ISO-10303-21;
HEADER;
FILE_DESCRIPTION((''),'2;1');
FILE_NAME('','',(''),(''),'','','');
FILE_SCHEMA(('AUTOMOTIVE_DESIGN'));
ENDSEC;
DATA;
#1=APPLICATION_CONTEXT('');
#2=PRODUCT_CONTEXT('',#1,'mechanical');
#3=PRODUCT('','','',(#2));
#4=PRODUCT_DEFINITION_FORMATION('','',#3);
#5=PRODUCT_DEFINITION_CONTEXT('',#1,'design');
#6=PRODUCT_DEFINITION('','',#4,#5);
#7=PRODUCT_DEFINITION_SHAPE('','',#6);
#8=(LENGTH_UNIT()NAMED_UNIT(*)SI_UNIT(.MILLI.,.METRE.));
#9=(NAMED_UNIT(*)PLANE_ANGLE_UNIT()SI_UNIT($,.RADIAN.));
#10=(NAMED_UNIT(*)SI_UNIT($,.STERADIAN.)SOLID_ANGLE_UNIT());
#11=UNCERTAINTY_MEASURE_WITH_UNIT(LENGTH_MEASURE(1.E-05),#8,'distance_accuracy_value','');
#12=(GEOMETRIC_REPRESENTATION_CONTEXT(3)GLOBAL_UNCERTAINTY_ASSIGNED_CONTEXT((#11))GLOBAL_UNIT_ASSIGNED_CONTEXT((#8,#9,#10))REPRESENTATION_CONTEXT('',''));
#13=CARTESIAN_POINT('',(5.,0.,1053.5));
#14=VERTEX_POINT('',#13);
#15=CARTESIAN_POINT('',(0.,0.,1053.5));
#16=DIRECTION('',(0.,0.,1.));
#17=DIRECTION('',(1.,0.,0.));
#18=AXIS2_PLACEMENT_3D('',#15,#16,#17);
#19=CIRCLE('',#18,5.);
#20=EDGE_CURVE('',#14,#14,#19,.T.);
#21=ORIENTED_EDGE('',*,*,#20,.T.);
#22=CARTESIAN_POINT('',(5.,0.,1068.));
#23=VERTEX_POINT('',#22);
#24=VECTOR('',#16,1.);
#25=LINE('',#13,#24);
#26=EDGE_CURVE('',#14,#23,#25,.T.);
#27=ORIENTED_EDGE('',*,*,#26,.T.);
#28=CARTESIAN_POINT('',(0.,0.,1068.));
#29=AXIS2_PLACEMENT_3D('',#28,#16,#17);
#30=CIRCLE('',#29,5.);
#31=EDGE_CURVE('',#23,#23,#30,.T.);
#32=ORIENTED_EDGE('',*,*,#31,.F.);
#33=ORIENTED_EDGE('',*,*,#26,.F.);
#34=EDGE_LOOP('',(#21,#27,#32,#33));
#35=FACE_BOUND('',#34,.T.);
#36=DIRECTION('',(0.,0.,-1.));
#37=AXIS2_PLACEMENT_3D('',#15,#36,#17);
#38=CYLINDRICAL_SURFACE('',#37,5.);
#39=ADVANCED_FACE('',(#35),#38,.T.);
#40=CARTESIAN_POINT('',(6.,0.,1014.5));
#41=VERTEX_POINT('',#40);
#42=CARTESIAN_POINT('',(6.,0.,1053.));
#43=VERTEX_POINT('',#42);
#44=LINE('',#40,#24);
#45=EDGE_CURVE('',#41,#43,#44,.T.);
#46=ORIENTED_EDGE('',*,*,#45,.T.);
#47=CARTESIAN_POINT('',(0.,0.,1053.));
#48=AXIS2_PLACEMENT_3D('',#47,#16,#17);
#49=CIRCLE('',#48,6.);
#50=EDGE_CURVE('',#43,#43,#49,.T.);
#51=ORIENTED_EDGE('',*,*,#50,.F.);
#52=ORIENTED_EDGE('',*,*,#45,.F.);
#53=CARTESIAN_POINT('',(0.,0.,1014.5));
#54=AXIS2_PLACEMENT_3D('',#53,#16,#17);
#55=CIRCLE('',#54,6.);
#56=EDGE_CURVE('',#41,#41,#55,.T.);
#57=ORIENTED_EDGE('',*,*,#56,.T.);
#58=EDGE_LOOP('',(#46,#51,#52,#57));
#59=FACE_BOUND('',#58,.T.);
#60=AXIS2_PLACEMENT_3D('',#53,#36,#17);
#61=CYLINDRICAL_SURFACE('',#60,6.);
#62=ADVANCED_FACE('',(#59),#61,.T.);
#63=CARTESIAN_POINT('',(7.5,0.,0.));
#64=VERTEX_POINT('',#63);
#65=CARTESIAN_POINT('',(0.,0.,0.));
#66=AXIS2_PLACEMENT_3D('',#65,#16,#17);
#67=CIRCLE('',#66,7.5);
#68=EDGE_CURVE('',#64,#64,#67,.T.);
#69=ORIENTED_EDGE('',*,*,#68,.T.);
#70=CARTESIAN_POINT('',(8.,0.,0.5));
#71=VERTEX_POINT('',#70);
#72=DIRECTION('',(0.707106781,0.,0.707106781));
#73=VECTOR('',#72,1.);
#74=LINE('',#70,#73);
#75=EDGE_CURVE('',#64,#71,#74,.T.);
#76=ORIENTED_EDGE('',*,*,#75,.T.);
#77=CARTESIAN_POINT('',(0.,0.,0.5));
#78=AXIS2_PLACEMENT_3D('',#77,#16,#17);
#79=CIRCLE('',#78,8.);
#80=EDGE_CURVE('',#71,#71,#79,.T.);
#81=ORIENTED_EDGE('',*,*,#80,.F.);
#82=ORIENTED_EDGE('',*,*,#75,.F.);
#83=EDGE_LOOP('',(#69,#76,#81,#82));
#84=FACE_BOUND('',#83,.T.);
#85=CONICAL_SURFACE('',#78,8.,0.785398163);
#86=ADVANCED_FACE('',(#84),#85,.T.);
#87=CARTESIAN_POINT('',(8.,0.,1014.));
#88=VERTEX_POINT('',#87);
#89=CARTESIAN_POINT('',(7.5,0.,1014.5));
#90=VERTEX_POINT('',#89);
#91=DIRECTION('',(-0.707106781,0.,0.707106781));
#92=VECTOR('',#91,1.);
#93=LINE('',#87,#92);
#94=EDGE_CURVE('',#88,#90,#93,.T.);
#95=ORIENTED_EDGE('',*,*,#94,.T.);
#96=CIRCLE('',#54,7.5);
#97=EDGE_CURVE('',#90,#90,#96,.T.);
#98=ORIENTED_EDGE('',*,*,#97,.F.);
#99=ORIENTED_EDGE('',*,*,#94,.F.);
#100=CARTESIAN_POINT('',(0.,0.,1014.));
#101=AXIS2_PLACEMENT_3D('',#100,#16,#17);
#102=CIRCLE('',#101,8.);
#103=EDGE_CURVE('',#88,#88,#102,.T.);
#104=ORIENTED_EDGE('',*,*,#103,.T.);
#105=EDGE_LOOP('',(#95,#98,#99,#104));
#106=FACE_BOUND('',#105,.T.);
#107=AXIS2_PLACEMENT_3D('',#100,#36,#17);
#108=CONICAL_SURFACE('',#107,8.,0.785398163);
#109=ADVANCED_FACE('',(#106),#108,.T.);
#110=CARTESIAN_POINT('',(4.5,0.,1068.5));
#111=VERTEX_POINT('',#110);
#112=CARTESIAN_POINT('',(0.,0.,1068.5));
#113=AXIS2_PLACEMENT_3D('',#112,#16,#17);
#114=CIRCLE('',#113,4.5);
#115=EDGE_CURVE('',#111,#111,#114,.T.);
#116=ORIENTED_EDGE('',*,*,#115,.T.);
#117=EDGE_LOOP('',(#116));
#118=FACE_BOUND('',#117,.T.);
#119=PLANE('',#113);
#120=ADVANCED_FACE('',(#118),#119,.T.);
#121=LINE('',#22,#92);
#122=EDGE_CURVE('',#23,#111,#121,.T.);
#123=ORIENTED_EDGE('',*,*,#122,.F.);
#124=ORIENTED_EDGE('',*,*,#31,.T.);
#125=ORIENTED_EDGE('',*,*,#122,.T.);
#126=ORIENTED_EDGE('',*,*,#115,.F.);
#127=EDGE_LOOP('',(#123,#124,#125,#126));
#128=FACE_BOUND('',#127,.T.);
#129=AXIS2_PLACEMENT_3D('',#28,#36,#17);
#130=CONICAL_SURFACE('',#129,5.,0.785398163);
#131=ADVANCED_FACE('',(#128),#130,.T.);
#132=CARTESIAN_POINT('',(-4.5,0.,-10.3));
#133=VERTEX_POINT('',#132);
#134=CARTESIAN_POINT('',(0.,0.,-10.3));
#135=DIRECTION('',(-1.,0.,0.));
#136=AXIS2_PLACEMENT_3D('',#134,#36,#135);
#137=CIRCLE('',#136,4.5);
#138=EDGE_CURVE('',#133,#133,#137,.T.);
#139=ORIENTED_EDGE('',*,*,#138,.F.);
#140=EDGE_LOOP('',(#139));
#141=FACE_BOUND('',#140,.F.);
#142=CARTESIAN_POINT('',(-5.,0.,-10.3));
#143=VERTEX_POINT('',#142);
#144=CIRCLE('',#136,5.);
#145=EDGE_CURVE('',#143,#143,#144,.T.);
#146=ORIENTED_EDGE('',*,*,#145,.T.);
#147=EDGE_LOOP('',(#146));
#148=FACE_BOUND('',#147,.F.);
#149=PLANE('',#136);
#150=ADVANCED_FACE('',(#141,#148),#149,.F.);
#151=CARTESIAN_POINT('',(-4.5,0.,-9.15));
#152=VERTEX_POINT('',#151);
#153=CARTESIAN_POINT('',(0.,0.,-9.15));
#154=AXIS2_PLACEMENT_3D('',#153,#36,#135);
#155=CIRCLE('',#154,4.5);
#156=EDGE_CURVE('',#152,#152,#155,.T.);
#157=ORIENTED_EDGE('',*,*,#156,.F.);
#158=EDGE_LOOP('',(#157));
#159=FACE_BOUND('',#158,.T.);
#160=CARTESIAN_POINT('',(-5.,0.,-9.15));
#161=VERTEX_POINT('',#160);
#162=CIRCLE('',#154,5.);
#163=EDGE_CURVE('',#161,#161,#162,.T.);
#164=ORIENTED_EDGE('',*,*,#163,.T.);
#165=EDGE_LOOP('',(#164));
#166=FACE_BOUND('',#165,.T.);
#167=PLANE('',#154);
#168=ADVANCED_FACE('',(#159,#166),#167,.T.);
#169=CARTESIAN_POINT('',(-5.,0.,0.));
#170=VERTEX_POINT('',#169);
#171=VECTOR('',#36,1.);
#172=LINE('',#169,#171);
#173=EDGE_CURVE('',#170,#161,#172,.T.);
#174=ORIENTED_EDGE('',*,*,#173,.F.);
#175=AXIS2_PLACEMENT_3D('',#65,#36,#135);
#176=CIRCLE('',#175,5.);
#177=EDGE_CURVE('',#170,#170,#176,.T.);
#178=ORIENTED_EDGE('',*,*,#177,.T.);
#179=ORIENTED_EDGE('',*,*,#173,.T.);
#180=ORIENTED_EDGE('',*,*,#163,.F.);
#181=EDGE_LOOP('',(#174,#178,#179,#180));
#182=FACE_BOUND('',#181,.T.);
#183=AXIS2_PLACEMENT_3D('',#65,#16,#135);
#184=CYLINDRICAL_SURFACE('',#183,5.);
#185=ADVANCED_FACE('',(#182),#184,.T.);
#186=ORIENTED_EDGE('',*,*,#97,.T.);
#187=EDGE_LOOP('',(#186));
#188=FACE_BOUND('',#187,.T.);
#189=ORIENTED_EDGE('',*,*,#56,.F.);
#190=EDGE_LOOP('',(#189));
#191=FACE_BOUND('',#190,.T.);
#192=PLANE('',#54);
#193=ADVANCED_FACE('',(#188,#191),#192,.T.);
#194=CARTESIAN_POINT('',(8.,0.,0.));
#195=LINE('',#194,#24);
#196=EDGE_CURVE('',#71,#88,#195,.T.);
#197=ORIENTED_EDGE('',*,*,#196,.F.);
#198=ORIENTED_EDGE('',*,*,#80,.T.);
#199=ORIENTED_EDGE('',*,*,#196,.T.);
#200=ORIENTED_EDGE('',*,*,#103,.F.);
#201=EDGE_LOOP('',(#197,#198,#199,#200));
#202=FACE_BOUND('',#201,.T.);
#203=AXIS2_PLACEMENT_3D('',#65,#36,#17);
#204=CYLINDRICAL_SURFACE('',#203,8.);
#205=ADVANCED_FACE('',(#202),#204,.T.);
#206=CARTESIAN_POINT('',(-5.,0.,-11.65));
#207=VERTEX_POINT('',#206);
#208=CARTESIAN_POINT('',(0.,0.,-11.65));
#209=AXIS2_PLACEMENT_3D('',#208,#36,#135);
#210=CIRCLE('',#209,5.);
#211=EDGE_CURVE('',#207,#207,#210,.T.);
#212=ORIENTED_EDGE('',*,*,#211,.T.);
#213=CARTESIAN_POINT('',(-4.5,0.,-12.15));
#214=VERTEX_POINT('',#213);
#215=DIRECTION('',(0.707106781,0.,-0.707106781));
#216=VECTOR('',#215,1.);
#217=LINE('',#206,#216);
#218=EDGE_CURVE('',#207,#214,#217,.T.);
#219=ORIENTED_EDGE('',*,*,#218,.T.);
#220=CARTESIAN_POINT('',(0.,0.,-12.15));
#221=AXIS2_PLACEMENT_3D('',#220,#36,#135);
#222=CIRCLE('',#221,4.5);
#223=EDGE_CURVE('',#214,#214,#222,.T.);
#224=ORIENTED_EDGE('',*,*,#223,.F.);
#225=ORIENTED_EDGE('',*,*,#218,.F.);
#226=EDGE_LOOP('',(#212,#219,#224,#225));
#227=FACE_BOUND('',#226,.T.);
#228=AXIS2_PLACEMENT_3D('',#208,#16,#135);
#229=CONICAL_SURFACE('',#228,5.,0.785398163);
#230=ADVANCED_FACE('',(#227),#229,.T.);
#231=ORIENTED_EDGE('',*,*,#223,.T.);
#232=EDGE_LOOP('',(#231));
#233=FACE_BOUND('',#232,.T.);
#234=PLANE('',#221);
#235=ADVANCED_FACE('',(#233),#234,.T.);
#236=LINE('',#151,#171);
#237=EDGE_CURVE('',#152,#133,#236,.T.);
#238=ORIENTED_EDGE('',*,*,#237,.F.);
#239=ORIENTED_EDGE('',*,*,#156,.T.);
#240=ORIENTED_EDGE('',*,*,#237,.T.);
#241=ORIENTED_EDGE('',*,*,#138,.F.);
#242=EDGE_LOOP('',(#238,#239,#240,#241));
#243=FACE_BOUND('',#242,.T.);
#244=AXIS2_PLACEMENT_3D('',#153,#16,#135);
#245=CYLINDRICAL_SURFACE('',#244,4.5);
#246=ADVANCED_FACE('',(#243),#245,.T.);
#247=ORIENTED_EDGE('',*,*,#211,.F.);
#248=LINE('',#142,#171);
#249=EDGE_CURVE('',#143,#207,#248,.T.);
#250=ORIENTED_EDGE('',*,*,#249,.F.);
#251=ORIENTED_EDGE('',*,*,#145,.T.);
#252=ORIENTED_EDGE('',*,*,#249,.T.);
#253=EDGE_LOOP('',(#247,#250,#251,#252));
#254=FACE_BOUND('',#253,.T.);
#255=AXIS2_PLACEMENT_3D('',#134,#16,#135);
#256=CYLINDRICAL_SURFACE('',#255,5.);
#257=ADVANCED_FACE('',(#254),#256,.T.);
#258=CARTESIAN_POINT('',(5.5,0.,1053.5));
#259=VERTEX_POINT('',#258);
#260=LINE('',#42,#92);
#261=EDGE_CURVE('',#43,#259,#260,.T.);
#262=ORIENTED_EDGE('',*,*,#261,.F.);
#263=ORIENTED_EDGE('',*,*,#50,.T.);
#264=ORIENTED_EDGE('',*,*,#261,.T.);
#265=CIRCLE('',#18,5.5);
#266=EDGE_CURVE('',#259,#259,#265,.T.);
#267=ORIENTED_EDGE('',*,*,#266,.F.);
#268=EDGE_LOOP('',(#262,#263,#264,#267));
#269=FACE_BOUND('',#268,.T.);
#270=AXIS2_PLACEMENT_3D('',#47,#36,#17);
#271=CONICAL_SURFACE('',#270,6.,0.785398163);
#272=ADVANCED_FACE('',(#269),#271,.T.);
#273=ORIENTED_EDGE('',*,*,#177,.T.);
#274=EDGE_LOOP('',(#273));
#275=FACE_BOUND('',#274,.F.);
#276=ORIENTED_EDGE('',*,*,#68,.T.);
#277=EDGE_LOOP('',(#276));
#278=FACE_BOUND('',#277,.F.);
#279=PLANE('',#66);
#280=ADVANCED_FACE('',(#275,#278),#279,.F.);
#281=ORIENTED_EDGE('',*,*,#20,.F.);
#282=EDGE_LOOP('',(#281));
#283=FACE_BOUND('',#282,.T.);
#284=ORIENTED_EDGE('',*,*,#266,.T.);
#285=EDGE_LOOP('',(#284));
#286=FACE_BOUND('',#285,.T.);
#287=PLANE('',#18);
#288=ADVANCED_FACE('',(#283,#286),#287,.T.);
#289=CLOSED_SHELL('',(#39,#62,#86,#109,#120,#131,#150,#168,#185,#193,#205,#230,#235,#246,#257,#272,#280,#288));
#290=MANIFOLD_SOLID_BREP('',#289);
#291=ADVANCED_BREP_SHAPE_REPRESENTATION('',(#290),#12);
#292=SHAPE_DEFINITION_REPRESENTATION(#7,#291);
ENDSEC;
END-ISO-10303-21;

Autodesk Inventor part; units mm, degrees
ref_plane "YZ Plane" through (0, 0, 0) normal (1, 0, 0) x (0, 1, 0)
ref_plane "XZ Plane" through (0, 0, 0) normal (0, 1, 0) x (-1, 0, 0)
ref_plane "XY Plane" through (0, 0, 0) normal (0, 0, 1) x (1, 0, 0)
sketch "Esboço1" plane through (0, 0, 0) normal (0, 0, 1) x (1, 0, 0)
  circle A0 centre (0, 0) radius 8
  dimension "d0" = 16
extrude "Extrusão1" add sketch "Esboço1" along normal blind 1014.5
sketch "Esboço2" plane through (0, 0, 1014.5) normal (0, 0, 1) x (1, 0, 0)
  circle A0 centre (0, 0) radius 6
  dimension "d3" = 12
extrude "Extrusão2" add sketch "Esboço2" along normal blind 39
sketch "Esboço3" plane through (0, 0, 1053.5) normal (0, 0, 1) x (1, 0, 0)
  circle A0 centre (0, 0) radius 5
  dimension "d6" = 10
extrude "Extrusão3" add sketch "Esboço3" along normal blind 15
sketch "Esboço4" plane through (0, 0, 0) normal (0, 0, -1) x (-1, 0, 0)
  circle A0 centre (0, 0) radius 5
  dimension "d9" = 10
extrude "Extrusão4" add sketch "Esboço4" along normal blind 9.15
sketch "Esboço5" plane through (0, 0, -9.15) normal (0, 0, -1) x (-1, 0, 0)
  circle A0 centre (0, 0) radius 4.5
  dimension "d12" = 9
extrude "Extrusão5" add sketch "Esboço5" along normal blind 1.15
sketch "Esboço6" plane through (0, 0, -10.3) normal (0, 0, -1) x (-1, 0, 0)
  circle A0 centre (0, 0) radius 5
  dimension "d15" = 10
extrude "Extrusão6" add sketch "Esboço6" along normal blind 1.85
thread "Rosca1" size "M12x1.75" class "6g" standard "ANSI Metric M Profile" length 14
chamfer "Chanfro1" distance 0.5 angle 45 5 edges at (-5, 0, 1068.5) (-6, 0, 1053.5) (-8, 0, 1014.5) (-8, 0, 0) (5, 0, -12.15)
properties part number "SFU16XX_Y2"
